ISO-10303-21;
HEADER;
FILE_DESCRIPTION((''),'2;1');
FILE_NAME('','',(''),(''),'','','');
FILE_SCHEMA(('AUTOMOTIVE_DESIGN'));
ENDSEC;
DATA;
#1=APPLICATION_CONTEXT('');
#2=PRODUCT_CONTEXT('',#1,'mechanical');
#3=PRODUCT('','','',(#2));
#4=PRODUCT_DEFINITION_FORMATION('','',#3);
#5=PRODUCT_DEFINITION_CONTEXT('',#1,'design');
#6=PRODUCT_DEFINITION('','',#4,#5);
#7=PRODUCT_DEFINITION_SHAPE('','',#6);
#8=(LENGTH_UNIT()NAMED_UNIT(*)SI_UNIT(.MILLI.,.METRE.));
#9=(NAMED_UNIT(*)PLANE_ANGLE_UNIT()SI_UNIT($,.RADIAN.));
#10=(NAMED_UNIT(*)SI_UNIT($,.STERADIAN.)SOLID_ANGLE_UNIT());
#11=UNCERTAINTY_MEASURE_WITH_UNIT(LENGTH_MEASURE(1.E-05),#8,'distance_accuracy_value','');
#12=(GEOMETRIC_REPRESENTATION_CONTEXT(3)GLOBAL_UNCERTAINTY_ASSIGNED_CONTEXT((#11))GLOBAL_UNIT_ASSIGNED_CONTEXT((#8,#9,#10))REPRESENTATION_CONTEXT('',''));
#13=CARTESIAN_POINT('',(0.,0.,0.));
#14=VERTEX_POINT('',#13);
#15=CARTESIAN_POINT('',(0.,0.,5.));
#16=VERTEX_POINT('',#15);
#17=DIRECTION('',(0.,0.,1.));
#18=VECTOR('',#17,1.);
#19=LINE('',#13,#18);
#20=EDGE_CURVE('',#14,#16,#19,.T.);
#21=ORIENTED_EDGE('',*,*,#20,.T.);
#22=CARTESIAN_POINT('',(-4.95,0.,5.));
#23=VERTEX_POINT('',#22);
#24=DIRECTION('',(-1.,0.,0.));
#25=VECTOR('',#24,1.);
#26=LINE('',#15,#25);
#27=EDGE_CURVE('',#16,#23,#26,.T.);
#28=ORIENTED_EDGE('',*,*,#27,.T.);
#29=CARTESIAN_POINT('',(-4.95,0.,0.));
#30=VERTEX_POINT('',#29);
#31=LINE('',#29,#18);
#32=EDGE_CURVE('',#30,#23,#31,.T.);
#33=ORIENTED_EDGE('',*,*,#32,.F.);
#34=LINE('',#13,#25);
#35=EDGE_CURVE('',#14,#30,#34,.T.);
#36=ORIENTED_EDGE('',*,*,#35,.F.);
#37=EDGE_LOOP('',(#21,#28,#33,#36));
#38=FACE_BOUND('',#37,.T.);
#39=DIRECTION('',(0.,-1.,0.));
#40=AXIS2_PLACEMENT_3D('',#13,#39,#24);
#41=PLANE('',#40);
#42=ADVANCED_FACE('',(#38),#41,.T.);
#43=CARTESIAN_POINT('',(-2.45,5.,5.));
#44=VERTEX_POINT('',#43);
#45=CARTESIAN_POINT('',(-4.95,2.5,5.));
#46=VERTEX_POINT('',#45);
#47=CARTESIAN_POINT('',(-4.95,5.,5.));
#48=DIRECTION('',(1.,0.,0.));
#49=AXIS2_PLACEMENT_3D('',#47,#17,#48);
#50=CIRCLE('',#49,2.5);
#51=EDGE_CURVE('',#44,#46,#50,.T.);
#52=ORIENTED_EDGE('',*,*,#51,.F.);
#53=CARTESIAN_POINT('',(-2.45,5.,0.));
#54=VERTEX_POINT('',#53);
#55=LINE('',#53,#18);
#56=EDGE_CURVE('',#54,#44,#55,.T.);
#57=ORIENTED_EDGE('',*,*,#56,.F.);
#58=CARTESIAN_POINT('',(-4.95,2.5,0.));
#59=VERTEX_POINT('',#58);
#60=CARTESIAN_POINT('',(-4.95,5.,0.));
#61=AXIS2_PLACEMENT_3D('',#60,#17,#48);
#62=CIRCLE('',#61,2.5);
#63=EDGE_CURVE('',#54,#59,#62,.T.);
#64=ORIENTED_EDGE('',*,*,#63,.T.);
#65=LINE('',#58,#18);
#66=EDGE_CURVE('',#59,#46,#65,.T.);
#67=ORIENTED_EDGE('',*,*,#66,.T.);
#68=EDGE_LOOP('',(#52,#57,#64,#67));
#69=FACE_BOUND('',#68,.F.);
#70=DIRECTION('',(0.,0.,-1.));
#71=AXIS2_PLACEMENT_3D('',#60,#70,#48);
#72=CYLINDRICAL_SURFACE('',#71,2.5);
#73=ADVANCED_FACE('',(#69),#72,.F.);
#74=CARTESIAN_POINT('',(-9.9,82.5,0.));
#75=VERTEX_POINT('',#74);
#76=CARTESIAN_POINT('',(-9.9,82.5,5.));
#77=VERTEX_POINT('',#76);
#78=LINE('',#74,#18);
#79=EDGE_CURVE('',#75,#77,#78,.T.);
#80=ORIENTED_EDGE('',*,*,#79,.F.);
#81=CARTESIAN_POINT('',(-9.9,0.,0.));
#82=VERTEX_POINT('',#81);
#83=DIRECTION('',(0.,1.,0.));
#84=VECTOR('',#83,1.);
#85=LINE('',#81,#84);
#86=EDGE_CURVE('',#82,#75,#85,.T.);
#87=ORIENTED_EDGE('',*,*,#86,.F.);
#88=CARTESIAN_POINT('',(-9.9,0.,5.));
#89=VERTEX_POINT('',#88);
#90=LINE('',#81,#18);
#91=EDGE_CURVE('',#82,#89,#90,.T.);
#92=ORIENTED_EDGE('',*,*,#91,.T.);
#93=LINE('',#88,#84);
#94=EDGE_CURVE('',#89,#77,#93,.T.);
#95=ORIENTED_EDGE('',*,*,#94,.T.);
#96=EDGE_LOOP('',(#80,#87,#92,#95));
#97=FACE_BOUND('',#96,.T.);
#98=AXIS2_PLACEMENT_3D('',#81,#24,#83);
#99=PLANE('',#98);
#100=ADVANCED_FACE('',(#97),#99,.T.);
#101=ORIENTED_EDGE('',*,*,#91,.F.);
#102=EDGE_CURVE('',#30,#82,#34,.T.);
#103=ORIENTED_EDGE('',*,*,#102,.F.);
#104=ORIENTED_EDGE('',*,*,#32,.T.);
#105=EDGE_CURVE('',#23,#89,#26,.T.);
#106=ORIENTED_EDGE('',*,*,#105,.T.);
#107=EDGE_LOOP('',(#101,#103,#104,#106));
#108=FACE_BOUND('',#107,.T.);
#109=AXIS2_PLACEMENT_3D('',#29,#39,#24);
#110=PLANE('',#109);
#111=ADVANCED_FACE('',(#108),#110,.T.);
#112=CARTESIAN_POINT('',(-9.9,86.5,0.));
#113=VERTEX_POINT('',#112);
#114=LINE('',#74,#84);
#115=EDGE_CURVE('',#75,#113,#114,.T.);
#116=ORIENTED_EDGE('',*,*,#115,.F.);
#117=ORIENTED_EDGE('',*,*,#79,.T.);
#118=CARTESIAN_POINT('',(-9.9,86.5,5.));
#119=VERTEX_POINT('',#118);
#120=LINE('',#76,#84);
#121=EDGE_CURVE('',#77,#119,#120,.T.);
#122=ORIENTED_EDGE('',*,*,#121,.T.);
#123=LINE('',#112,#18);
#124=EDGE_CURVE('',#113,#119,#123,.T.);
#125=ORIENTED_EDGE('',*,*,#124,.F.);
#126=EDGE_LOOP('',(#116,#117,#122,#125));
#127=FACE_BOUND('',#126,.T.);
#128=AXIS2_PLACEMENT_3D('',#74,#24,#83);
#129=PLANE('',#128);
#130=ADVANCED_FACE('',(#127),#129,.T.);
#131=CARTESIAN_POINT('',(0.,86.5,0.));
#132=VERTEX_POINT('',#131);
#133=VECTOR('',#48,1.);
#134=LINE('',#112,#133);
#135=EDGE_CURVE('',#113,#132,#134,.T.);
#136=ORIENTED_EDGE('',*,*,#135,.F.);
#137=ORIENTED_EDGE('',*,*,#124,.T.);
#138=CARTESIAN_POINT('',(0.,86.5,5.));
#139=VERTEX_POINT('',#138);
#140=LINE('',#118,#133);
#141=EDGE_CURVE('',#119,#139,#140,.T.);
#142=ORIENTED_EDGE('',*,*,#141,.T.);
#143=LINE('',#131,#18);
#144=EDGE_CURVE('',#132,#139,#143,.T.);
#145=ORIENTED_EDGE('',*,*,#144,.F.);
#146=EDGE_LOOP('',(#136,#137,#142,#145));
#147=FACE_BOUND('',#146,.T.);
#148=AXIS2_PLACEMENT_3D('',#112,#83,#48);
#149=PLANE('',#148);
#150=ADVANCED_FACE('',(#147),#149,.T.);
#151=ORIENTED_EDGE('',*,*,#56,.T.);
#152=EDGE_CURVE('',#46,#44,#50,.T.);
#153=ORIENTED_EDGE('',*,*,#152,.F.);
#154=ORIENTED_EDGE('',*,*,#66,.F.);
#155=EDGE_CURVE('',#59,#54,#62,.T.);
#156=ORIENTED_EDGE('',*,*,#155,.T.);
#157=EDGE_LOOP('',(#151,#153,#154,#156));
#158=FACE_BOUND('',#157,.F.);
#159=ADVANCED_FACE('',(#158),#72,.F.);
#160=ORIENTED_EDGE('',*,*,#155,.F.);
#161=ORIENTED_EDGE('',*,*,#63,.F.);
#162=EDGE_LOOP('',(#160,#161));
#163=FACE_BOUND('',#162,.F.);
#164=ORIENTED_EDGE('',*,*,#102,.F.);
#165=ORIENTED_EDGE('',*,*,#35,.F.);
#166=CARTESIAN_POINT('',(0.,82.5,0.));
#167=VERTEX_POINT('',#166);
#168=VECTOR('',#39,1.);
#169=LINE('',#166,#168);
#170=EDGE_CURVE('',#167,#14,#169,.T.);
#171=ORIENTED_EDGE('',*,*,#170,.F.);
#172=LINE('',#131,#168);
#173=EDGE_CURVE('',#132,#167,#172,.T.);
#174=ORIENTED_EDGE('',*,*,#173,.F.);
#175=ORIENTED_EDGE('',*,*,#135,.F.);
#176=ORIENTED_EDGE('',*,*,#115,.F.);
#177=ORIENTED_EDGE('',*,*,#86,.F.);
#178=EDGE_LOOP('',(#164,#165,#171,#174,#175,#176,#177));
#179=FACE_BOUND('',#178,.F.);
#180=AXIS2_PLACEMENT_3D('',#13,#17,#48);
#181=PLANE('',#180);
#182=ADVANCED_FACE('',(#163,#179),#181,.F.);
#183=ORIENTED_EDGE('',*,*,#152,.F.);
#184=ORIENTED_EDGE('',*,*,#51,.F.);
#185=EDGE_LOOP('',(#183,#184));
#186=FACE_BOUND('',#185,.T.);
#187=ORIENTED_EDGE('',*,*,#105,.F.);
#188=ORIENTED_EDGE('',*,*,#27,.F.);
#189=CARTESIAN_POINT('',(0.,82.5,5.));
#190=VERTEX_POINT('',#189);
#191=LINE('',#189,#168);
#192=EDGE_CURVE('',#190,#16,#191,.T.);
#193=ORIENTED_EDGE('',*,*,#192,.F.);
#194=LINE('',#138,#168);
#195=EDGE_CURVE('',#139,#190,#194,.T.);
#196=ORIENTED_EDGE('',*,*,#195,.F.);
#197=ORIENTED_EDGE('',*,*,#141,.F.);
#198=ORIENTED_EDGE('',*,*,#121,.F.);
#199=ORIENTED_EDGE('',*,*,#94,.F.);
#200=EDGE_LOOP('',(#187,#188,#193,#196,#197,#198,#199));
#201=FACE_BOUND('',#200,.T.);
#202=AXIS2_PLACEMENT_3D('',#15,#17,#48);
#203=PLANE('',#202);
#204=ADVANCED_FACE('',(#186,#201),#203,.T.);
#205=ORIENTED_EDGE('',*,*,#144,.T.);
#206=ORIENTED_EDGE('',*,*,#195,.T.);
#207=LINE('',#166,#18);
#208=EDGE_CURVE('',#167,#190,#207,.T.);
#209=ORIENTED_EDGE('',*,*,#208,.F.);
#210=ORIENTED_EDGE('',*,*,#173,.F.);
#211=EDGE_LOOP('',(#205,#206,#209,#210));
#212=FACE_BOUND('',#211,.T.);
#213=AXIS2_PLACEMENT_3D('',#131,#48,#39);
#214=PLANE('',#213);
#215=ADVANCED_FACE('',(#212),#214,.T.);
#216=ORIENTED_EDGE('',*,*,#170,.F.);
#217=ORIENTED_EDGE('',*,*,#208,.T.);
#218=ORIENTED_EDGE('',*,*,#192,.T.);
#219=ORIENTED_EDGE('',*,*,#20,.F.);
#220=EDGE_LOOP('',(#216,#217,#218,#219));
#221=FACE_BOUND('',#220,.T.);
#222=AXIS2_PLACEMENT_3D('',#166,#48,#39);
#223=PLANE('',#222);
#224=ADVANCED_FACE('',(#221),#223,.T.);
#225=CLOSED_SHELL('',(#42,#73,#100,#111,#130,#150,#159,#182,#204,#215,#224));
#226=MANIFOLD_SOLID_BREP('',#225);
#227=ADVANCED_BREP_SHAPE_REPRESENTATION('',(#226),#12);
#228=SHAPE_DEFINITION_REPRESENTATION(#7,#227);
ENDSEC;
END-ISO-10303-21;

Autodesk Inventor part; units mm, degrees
ref_plane "YZ Plane" through (0, 0, 0) normal (1, 0, 0) x (0, 1, 0)
ref_plane "XZ Plane" through (0, 0, 0) normal (0, 1, 0) x (-1, 0, 0)
ref_plane "XY Plane" through (0, 0, 0) normal (0, 0, 1) x (1, 0, 0)
sketch "Sketch2" plane through (0, 0, 0) normal (0, 0, 1) x (1, 0, 0)
  line L0 (0, 0) -> (-9.9, 0)
  line L1 (-4.95, 0) -> (-4.95, 2.5)
  line L2 (-4.95, 0) -> (-2.45, 0) construction
  circle A0 centre (-4.95, 5) radius 2.5
  line L3 (-4.95, 7.5) -> (32.05, 7.5) construction
  line L4 (0, 0) -> (-9.9, 0)
  line L5 (0, 0) -> (-9.9, 0)
  line L6 (-4.95, 7.5) -> (66.05, 7.5) construction
  line L7 (-4.95, 7.5) -> (70.05, 7.5) construction
  line L8 (0, 0) -> (-9.9, 0)
  line L9 (-9.9, 0) -> (-9.9, 82.5)
  line L10 (0, 82.5) -> (0, 0)
  line L11 (-4.95, 7.5) -> (74.05, 7.5) construction
  line L12 (-9.9, 86.5) -> (0, 86.5)
  line L13 (0, 86.5) -> (0, 82.5)
  line L14 (-9.9, 82.5) -> (-9.9, 86.5)
  dimension "d35" = 5
  dimension "d33" = 2.5
  dimension "d34" = 90
  dimension "d48" = 9.9
extrude "Extrusion7" add sketch "Sketch2" along normal blind 5
properties part number "Cube_Holder_SB_V1_(71mm)"
